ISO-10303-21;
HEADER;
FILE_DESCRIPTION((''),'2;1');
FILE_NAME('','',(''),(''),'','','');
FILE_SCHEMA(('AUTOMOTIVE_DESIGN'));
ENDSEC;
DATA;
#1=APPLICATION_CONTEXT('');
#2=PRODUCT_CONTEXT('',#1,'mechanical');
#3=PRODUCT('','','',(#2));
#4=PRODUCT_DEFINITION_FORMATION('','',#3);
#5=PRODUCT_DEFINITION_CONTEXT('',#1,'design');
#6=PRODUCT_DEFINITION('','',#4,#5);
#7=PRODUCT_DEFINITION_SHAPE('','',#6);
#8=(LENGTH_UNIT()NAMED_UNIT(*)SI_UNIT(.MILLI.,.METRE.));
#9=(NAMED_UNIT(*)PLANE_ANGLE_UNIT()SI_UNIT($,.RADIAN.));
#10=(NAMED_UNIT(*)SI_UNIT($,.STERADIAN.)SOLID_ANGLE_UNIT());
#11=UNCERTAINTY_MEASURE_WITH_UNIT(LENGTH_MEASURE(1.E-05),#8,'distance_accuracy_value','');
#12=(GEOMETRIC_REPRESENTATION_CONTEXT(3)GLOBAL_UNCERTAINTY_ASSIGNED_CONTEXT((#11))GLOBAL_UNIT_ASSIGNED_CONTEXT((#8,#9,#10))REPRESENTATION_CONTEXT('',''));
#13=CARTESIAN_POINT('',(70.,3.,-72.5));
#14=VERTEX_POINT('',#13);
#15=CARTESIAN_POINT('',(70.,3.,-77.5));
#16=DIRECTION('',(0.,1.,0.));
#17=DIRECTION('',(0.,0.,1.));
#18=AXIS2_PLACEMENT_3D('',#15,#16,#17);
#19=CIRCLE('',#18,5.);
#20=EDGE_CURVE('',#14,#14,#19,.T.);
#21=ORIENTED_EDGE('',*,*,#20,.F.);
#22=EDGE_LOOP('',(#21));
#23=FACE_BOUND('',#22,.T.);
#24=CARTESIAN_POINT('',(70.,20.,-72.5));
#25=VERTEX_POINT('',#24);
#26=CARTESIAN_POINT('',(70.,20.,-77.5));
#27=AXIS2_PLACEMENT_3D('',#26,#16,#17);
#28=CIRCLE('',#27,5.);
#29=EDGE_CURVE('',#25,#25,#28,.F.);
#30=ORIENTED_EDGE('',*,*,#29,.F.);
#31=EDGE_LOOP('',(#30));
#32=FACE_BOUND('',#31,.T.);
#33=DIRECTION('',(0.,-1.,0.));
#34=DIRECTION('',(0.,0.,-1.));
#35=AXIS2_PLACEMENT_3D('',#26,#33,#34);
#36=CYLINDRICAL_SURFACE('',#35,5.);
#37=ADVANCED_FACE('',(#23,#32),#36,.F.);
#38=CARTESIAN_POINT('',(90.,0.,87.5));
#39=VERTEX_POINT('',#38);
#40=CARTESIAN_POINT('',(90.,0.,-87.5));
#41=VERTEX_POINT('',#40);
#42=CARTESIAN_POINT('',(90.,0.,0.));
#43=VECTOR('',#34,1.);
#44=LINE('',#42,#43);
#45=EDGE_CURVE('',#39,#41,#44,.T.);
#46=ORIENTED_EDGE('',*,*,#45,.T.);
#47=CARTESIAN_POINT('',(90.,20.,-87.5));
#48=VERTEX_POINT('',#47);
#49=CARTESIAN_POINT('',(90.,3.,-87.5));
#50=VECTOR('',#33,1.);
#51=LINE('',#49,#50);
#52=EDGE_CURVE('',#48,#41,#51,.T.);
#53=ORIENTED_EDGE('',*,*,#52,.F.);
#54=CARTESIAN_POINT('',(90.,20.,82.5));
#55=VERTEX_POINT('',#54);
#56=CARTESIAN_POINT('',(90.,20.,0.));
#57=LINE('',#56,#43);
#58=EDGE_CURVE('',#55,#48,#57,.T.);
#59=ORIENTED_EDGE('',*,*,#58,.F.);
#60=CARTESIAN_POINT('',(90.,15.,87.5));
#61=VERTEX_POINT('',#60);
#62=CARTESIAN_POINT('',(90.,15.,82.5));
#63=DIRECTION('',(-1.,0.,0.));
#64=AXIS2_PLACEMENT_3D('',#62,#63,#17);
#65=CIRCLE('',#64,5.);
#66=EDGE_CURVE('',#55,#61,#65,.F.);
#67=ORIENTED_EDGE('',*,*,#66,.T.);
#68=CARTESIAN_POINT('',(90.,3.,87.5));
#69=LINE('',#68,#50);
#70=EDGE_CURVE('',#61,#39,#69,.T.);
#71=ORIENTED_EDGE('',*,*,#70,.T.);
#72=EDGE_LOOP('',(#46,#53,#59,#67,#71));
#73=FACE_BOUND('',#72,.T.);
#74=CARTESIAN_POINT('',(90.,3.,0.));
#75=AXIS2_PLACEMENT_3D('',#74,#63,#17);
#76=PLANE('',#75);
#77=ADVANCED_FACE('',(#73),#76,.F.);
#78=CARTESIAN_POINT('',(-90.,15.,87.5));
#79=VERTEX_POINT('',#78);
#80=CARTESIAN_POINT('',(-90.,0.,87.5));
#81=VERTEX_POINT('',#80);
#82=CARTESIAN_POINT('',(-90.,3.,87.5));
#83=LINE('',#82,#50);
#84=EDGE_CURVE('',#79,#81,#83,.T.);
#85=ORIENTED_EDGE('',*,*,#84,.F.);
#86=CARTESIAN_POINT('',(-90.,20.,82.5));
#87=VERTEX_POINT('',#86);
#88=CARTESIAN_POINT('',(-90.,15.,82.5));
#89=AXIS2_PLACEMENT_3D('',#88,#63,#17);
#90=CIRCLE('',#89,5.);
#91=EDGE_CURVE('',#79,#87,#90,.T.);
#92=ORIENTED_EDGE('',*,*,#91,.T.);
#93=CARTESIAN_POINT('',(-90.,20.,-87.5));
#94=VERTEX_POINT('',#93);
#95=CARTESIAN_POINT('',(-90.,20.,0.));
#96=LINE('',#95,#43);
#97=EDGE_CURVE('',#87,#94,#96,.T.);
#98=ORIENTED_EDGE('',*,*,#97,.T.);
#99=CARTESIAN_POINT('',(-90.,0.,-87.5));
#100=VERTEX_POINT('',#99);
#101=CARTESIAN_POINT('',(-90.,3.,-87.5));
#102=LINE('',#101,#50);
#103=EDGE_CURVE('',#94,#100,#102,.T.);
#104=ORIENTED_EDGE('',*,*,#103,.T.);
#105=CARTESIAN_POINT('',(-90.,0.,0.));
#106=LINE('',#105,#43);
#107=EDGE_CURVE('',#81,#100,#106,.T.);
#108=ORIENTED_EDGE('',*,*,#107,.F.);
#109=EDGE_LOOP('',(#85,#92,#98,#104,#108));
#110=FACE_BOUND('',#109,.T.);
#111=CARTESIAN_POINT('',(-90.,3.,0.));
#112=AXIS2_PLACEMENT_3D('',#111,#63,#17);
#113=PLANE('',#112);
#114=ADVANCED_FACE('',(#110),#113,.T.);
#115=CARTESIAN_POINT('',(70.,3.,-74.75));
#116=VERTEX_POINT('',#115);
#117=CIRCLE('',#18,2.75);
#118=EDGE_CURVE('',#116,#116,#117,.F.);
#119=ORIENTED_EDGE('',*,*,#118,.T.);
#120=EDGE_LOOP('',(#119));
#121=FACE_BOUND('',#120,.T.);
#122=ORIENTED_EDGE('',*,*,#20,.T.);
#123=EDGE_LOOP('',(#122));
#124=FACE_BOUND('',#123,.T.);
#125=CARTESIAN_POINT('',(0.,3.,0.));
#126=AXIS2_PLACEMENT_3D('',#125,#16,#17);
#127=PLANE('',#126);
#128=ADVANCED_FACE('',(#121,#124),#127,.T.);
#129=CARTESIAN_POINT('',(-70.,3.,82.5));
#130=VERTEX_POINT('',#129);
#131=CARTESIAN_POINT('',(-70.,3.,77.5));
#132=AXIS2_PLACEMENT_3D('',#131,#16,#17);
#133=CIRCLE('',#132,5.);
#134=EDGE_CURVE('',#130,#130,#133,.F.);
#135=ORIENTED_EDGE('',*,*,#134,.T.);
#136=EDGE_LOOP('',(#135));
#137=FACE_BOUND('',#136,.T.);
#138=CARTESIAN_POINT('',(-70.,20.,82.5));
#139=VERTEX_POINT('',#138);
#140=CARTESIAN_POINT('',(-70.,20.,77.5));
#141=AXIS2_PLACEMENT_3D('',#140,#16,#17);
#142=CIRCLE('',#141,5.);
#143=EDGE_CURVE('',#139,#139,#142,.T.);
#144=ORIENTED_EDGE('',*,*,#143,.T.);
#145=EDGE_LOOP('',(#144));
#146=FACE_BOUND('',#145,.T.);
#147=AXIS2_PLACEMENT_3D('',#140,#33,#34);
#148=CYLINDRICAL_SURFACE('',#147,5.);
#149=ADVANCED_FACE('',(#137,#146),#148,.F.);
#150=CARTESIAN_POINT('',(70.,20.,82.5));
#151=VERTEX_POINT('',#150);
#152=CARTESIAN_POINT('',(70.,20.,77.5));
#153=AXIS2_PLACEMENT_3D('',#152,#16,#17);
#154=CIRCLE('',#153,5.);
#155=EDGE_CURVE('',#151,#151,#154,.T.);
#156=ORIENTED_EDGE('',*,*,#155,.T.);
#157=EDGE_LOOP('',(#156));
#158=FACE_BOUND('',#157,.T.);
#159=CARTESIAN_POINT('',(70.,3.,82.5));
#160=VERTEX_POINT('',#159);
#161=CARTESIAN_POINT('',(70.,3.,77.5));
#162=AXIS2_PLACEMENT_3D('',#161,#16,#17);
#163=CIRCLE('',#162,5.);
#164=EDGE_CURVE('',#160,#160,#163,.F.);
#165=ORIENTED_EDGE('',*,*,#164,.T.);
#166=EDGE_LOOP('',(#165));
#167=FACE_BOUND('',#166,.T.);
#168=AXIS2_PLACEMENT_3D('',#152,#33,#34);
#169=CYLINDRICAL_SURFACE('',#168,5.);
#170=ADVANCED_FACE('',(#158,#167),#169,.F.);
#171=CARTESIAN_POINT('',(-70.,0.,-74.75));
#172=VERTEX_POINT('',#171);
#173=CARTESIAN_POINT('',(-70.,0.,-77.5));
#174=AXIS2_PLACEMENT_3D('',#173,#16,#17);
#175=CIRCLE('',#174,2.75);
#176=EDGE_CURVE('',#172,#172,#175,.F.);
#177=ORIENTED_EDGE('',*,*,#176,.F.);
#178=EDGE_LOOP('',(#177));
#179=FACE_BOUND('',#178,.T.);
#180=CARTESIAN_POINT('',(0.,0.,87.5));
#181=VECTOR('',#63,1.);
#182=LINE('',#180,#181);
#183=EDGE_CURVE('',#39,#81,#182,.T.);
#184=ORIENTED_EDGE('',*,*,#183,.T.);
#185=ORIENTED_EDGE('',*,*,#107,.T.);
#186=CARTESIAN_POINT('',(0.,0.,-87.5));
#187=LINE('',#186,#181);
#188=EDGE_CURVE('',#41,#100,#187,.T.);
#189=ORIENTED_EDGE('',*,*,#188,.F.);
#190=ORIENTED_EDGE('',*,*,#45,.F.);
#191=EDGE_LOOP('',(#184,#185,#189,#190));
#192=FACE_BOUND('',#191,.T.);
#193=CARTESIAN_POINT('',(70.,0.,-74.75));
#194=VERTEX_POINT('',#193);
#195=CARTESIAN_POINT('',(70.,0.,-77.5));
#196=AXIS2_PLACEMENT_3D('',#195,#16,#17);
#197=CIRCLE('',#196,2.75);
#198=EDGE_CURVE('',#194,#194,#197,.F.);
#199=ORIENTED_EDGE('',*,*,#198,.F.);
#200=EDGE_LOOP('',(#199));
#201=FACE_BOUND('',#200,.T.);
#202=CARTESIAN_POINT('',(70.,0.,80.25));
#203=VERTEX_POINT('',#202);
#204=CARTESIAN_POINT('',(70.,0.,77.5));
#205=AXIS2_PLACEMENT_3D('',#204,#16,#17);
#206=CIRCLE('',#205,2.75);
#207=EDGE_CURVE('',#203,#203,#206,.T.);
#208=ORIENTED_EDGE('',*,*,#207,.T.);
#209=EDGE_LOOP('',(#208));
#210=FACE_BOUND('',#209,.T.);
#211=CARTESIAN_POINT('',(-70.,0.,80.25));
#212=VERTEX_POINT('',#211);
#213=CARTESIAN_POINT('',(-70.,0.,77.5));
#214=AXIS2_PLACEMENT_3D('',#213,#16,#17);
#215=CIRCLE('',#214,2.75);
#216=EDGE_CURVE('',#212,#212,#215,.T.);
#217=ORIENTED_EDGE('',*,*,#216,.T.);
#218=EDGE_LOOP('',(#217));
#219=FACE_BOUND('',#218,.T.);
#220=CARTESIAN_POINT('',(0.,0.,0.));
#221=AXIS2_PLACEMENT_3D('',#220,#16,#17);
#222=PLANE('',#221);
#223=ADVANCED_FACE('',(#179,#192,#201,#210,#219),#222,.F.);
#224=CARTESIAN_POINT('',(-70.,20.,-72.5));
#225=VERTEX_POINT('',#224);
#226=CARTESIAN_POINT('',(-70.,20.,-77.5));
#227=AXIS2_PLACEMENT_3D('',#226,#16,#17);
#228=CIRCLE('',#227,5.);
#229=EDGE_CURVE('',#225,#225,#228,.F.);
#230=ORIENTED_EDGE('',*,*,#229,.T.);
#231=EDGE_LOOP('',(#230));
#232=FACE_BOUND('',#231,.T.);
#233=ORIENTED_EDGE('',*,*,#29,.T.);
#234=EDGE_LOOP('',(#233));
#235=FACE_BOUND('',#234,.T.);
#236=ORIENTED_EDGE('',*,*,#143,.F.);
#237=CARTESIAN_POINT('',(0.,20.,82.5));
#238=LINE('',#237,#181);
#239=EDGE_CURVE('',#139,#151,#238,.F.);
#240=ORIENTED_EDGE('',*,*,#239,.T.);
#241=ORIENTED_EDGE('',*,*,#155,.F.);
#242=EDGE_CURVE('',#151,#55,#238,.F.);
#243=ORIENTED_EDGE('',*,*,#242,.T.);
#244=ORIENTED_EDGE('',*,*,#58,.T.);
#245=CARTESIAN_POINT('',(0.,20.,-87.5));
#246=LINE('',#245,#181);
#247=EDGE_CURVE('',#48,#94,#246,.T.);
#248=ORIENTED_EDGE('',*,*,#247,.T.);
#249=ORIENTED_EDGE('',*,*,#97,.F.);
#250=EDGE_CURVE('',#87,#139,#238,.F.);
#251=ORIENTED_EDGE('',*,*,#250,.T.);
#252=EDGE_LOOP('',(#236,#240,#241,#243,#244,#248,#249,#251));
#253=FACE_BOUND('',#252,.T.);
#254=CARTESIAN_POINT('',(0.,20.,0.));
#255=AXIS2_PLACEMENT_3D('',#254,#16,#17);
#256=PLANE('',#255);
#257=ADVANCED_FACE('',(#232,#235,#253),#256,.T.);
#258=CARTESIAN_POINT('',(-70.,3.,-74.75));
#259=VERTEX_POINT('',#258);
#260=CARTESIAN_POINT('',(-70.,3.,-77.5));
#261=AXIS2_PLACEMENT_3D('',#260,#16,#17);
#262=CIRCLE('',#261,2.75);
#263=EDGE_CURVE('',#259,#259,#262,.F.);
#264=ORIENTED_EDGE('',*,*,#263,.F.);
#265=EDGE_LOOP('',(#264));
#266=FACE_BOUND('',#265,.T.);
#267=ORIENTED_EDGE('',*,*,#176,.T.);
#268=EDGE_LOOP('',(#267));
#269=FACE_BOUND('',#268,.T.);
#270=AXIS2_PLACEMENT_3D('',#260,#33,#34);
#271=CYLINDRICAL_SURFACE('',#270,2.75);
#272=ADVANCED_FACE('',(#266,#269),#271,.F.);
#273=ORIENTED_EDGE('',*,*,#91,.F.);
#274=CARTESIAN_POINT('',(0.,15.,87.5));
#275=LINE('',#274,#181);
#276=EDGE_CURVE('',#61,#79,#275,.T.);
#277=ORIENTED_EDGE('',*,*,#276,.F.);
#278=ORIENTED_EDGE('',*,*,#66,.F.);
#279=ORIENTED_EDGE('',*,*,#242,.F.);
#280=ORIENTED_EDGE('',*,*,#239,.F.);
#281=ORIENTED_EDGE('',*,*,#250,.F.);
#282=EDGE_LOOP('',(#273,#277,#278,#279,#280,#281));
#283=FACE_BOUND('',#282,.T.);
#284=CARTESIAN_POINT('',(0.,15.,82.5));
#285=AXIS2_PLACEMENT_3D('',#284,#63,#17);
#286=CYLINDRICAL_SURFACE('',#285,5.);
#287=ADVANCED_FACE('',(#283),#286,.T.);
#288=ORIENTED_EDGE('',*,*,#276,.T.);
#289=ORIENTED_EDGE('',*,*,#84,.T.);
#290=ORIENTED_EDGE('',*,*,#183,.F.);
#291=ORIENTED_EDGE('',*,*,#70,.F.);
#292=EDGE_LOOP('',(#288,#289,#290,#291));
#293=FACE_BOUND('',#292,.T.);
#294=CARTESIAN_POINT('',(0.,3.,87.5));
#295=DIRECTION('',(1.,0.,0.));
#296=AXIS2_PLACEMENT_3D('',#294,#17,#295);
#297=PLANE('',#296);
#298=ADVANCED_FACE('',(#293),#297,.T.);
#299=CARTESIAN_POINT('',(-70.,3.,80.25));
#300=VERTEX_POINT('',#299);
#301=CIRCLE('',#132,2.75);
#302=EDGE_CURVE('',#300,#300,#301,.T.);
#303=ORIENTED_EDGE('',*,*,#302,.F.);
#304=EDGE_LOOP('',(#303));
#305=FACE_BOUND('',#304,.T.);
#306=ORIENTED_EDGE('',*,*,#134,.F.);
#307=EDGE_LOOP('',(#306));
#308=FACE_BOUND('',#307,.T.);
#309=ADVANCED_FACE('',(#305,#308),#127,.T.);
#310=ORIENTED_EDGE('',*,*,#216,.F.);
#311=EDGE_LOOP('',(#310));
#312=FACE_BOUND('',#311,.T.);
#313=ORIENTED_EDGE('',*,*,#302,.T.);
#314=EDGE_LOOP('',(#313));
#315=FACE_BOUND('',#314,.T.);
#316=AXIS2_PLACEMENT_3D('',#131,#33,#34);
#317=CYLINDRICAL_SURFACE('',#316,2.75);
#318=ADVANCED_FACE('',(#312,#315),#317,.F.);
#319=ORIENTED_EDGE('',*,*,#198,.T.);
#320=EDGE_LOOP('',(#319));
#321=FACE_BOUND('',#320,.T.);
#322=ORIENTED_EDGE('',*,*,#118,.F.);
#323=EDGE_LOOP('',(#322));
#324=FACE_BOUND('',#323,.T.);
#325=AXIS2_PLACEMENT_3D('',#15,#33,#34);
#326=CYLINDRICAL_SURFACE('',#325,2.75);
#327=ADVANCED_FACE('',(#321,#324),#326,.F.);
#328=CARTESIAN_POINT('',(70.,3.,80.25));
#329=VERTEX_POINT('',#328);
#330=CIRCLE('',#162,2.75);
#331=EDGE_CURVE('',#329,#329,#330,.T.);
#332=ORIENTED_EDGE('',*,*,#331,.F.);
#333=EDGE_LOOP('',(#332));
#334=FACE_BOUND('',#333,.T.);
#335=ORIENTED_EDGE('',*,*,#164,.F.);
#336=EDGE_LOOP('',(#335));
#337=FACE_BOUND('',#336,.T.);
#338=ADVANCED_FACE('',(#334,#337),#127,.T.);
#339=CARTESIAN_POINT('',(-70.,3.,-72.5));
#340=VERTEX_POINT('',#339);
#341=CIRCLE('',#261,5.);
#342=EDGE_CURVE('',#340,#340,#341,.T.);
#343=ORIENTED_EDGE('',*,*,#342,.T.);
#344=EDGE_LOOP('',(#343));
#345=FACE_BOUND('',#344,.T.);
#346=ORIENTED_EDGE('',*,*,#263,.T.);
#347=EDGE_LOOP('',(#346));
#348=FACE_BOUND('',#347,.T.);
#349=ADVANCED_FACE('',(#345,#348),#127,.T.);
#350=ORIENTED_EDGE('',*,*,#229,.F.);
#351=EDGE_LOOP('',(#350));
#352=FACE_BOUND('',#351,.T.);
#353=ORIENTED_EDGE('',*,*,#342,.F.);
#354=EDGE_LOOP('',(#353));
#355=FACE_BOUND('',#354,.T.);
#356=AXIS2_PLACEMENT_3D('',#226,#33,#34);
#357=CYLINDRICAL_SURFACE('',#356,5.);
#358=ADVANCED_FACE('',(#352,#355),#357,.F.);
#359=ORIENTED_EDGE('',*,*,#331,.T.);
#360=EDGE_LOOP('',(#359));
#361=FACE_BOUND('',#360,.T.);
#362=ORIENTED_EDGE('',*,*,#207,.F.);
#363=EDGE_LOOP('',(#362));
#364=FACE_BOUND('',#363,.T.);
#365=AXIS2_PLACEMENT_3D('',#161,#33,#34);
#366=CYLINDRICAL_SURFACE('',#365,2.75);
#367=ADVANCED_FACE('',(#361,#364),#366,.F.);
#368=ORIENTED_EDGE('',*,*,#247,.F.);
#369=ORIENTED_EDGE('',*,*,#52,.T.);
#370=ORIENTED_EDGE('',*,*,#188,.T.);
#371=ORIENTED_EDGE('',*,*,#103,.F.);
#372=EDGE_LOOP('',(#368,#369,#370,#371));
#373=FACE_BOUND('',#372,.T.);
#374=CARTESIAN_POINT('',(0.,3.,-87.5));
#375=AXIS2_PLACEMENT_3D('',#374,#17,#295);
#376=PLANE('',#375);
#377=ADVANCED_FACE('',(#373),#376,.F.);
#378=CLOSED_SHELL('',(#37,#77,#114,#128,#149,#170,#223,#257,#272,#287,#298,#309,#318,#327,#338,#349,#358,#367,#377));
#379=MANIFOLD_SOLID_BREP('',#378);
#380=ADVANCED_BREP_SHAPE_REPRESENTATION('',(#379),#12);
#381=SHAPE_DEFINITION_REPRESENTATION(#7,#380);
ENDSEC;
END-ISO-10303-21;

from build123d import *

# Parameters (mm, degrees)
SZKIC1_W                    = 180
SZKIC1_H                    = 175
SZKIC1_R                    = 5
SZKIC1_R_2                  = 2.75
DODANIE_WYCI_GNI_CIE1_DEPTH = 3
SZKIC1_4_W                  = 180
SZKIC1_4_H                  = 175
SZKIC1_4_R                  = 5
DODANIE_WYCI_GNI_CIE2_DEPTH = 20
ZAOKR_GLENIE1_R             = 5


with BuildPart() as part:
    # Szkic1 → Dodanie-wyciągnięcie1 (new body)
    # profile 1 of 5: a face of its own
    with BuildSketch(Plane(origin=(0, 0, 0), x_dir=(1, 0, 0), z_dir=(0, 1, 0))):
        Rectangle(SZKIC1_W, SZKIC1_H)
        with Locations((70, -77.5)):
            Circle(SZKIC1_R, mode=Mode.SUBTRACT)
        with Locations((-70, -77.5)):
            Circle(SZKIC1_R, mode=Mode.SUBTRACT)
        with Locations((70, 77.5)):
            Circle(SZKIC1_R, mode=Mode.SUBTRACT)
        with Locations((-70, 77.5)):
            Circle(SZKIC1_R, mode=Mode.SUBTRACT)
    # profile 2 of 5: a face of its own
    with BuildSketch(Plane(origin=(0, 0, 0), x_dir=(1, 0, 0), z_dir=(0, 1, 0))):
        with Locations((-70, -77.5)):
            Circle(SZKIC1_R)
        with Locations(Location((-70, -77.5, 0), (0, 0, 270))):
            Circle(SZKIC1_R_2, mode=Mode.SUBTRACT)
    # profile 3 of 5: a face of its own
    with BuildSketch(Plane(origin=(0, 0, 0), x_dir=(1, 0, 0), z_dir=(0, 1, 0))):
        with Locations((-70, 77.5)):
            Circle(SZKIC1_R)
        with Locations(Location((-70, 77.5, 0), (0, 0, 270))):
            Circle(SZKIC1_R_2, mode=Mode.SUBTRACT)
    # profile 4 of 5: a face of its own
    with BuildSketch(Plane(origin=(0, 0, 0), x_dir=(1, 0, 0), z_dir=(0, 1, 0))):
        with Locations((70, 77.5)):
            Circle(SZKIC1_R)
        with Locations(Location((70, 77.5, 0), (0, 0, 270))):
            Circle(SZKIC1_R_2, mode=Mode.SUBTRACT)
    # profile 5 of 5: a face of its own
    with BuildSketch(Plane(origin=(0, 0, 0), x_dir=(1, 0, 0), z_dir=(0, 1, 0))):
        with Locations((70, -77.5)):
            Circle(SZKIC1_R)
        with Locations(Location((70, -77.5, 0), (0, 0, 270))):
            Circle(SZKIC1_R_2, mode=Mode.SUBTRACT)
    extrude(amount=DODANIE_WYCI_GNI_CIE1_DEPTH)

    # Szkic1<4> → Dodanie-wyciągnięcie2 (add)
    with BuildSketch(Plane(origin=(0, 0, 0), x_dir=(1, 0, 0), z_dir=(0, 1, 0))):
        Rectangle(SZKIC1_4_W, SZKIC1_4_H)
        with Locations(Location((70, -77.5, 0), (0, 0, 270))):
            Circle(SZKIC1_4_R, mode=Mode.SUBTRACT)
        with Locations(Location((-70, -77.5, 0), (0, 0, 270))):
            Circle(SZKIC1_4_R, mode=Mode.SUBTRACT)
        with Locations(Location((70, 77.5, 0), (0, 0, 270))):
            Circle(SZKIC1_4_R, mode=Mode.SUBTRACT)
        with Locations(Location((-70, 77.5, 0), (0, 0, 270))):
            Circle(SZKIC1_4_R, mode=Mode.SUBTRACT)
    extrude(amount=DODANIE_WYCI_GNI_CIE2_DEPTH)

    # Zaokrąglenie1
    zaokr_glenie1_edges = [part.edges().sort_by_distance(p)[0] for p in [
        (0, 20, 87.5),
    ]]
    fillet(zaokr_glenie1_edges, radius=ZAOKR_GLENIE1_R - 0.0001)  # a hair under: the kernel refuses the full size


solid = part.part
